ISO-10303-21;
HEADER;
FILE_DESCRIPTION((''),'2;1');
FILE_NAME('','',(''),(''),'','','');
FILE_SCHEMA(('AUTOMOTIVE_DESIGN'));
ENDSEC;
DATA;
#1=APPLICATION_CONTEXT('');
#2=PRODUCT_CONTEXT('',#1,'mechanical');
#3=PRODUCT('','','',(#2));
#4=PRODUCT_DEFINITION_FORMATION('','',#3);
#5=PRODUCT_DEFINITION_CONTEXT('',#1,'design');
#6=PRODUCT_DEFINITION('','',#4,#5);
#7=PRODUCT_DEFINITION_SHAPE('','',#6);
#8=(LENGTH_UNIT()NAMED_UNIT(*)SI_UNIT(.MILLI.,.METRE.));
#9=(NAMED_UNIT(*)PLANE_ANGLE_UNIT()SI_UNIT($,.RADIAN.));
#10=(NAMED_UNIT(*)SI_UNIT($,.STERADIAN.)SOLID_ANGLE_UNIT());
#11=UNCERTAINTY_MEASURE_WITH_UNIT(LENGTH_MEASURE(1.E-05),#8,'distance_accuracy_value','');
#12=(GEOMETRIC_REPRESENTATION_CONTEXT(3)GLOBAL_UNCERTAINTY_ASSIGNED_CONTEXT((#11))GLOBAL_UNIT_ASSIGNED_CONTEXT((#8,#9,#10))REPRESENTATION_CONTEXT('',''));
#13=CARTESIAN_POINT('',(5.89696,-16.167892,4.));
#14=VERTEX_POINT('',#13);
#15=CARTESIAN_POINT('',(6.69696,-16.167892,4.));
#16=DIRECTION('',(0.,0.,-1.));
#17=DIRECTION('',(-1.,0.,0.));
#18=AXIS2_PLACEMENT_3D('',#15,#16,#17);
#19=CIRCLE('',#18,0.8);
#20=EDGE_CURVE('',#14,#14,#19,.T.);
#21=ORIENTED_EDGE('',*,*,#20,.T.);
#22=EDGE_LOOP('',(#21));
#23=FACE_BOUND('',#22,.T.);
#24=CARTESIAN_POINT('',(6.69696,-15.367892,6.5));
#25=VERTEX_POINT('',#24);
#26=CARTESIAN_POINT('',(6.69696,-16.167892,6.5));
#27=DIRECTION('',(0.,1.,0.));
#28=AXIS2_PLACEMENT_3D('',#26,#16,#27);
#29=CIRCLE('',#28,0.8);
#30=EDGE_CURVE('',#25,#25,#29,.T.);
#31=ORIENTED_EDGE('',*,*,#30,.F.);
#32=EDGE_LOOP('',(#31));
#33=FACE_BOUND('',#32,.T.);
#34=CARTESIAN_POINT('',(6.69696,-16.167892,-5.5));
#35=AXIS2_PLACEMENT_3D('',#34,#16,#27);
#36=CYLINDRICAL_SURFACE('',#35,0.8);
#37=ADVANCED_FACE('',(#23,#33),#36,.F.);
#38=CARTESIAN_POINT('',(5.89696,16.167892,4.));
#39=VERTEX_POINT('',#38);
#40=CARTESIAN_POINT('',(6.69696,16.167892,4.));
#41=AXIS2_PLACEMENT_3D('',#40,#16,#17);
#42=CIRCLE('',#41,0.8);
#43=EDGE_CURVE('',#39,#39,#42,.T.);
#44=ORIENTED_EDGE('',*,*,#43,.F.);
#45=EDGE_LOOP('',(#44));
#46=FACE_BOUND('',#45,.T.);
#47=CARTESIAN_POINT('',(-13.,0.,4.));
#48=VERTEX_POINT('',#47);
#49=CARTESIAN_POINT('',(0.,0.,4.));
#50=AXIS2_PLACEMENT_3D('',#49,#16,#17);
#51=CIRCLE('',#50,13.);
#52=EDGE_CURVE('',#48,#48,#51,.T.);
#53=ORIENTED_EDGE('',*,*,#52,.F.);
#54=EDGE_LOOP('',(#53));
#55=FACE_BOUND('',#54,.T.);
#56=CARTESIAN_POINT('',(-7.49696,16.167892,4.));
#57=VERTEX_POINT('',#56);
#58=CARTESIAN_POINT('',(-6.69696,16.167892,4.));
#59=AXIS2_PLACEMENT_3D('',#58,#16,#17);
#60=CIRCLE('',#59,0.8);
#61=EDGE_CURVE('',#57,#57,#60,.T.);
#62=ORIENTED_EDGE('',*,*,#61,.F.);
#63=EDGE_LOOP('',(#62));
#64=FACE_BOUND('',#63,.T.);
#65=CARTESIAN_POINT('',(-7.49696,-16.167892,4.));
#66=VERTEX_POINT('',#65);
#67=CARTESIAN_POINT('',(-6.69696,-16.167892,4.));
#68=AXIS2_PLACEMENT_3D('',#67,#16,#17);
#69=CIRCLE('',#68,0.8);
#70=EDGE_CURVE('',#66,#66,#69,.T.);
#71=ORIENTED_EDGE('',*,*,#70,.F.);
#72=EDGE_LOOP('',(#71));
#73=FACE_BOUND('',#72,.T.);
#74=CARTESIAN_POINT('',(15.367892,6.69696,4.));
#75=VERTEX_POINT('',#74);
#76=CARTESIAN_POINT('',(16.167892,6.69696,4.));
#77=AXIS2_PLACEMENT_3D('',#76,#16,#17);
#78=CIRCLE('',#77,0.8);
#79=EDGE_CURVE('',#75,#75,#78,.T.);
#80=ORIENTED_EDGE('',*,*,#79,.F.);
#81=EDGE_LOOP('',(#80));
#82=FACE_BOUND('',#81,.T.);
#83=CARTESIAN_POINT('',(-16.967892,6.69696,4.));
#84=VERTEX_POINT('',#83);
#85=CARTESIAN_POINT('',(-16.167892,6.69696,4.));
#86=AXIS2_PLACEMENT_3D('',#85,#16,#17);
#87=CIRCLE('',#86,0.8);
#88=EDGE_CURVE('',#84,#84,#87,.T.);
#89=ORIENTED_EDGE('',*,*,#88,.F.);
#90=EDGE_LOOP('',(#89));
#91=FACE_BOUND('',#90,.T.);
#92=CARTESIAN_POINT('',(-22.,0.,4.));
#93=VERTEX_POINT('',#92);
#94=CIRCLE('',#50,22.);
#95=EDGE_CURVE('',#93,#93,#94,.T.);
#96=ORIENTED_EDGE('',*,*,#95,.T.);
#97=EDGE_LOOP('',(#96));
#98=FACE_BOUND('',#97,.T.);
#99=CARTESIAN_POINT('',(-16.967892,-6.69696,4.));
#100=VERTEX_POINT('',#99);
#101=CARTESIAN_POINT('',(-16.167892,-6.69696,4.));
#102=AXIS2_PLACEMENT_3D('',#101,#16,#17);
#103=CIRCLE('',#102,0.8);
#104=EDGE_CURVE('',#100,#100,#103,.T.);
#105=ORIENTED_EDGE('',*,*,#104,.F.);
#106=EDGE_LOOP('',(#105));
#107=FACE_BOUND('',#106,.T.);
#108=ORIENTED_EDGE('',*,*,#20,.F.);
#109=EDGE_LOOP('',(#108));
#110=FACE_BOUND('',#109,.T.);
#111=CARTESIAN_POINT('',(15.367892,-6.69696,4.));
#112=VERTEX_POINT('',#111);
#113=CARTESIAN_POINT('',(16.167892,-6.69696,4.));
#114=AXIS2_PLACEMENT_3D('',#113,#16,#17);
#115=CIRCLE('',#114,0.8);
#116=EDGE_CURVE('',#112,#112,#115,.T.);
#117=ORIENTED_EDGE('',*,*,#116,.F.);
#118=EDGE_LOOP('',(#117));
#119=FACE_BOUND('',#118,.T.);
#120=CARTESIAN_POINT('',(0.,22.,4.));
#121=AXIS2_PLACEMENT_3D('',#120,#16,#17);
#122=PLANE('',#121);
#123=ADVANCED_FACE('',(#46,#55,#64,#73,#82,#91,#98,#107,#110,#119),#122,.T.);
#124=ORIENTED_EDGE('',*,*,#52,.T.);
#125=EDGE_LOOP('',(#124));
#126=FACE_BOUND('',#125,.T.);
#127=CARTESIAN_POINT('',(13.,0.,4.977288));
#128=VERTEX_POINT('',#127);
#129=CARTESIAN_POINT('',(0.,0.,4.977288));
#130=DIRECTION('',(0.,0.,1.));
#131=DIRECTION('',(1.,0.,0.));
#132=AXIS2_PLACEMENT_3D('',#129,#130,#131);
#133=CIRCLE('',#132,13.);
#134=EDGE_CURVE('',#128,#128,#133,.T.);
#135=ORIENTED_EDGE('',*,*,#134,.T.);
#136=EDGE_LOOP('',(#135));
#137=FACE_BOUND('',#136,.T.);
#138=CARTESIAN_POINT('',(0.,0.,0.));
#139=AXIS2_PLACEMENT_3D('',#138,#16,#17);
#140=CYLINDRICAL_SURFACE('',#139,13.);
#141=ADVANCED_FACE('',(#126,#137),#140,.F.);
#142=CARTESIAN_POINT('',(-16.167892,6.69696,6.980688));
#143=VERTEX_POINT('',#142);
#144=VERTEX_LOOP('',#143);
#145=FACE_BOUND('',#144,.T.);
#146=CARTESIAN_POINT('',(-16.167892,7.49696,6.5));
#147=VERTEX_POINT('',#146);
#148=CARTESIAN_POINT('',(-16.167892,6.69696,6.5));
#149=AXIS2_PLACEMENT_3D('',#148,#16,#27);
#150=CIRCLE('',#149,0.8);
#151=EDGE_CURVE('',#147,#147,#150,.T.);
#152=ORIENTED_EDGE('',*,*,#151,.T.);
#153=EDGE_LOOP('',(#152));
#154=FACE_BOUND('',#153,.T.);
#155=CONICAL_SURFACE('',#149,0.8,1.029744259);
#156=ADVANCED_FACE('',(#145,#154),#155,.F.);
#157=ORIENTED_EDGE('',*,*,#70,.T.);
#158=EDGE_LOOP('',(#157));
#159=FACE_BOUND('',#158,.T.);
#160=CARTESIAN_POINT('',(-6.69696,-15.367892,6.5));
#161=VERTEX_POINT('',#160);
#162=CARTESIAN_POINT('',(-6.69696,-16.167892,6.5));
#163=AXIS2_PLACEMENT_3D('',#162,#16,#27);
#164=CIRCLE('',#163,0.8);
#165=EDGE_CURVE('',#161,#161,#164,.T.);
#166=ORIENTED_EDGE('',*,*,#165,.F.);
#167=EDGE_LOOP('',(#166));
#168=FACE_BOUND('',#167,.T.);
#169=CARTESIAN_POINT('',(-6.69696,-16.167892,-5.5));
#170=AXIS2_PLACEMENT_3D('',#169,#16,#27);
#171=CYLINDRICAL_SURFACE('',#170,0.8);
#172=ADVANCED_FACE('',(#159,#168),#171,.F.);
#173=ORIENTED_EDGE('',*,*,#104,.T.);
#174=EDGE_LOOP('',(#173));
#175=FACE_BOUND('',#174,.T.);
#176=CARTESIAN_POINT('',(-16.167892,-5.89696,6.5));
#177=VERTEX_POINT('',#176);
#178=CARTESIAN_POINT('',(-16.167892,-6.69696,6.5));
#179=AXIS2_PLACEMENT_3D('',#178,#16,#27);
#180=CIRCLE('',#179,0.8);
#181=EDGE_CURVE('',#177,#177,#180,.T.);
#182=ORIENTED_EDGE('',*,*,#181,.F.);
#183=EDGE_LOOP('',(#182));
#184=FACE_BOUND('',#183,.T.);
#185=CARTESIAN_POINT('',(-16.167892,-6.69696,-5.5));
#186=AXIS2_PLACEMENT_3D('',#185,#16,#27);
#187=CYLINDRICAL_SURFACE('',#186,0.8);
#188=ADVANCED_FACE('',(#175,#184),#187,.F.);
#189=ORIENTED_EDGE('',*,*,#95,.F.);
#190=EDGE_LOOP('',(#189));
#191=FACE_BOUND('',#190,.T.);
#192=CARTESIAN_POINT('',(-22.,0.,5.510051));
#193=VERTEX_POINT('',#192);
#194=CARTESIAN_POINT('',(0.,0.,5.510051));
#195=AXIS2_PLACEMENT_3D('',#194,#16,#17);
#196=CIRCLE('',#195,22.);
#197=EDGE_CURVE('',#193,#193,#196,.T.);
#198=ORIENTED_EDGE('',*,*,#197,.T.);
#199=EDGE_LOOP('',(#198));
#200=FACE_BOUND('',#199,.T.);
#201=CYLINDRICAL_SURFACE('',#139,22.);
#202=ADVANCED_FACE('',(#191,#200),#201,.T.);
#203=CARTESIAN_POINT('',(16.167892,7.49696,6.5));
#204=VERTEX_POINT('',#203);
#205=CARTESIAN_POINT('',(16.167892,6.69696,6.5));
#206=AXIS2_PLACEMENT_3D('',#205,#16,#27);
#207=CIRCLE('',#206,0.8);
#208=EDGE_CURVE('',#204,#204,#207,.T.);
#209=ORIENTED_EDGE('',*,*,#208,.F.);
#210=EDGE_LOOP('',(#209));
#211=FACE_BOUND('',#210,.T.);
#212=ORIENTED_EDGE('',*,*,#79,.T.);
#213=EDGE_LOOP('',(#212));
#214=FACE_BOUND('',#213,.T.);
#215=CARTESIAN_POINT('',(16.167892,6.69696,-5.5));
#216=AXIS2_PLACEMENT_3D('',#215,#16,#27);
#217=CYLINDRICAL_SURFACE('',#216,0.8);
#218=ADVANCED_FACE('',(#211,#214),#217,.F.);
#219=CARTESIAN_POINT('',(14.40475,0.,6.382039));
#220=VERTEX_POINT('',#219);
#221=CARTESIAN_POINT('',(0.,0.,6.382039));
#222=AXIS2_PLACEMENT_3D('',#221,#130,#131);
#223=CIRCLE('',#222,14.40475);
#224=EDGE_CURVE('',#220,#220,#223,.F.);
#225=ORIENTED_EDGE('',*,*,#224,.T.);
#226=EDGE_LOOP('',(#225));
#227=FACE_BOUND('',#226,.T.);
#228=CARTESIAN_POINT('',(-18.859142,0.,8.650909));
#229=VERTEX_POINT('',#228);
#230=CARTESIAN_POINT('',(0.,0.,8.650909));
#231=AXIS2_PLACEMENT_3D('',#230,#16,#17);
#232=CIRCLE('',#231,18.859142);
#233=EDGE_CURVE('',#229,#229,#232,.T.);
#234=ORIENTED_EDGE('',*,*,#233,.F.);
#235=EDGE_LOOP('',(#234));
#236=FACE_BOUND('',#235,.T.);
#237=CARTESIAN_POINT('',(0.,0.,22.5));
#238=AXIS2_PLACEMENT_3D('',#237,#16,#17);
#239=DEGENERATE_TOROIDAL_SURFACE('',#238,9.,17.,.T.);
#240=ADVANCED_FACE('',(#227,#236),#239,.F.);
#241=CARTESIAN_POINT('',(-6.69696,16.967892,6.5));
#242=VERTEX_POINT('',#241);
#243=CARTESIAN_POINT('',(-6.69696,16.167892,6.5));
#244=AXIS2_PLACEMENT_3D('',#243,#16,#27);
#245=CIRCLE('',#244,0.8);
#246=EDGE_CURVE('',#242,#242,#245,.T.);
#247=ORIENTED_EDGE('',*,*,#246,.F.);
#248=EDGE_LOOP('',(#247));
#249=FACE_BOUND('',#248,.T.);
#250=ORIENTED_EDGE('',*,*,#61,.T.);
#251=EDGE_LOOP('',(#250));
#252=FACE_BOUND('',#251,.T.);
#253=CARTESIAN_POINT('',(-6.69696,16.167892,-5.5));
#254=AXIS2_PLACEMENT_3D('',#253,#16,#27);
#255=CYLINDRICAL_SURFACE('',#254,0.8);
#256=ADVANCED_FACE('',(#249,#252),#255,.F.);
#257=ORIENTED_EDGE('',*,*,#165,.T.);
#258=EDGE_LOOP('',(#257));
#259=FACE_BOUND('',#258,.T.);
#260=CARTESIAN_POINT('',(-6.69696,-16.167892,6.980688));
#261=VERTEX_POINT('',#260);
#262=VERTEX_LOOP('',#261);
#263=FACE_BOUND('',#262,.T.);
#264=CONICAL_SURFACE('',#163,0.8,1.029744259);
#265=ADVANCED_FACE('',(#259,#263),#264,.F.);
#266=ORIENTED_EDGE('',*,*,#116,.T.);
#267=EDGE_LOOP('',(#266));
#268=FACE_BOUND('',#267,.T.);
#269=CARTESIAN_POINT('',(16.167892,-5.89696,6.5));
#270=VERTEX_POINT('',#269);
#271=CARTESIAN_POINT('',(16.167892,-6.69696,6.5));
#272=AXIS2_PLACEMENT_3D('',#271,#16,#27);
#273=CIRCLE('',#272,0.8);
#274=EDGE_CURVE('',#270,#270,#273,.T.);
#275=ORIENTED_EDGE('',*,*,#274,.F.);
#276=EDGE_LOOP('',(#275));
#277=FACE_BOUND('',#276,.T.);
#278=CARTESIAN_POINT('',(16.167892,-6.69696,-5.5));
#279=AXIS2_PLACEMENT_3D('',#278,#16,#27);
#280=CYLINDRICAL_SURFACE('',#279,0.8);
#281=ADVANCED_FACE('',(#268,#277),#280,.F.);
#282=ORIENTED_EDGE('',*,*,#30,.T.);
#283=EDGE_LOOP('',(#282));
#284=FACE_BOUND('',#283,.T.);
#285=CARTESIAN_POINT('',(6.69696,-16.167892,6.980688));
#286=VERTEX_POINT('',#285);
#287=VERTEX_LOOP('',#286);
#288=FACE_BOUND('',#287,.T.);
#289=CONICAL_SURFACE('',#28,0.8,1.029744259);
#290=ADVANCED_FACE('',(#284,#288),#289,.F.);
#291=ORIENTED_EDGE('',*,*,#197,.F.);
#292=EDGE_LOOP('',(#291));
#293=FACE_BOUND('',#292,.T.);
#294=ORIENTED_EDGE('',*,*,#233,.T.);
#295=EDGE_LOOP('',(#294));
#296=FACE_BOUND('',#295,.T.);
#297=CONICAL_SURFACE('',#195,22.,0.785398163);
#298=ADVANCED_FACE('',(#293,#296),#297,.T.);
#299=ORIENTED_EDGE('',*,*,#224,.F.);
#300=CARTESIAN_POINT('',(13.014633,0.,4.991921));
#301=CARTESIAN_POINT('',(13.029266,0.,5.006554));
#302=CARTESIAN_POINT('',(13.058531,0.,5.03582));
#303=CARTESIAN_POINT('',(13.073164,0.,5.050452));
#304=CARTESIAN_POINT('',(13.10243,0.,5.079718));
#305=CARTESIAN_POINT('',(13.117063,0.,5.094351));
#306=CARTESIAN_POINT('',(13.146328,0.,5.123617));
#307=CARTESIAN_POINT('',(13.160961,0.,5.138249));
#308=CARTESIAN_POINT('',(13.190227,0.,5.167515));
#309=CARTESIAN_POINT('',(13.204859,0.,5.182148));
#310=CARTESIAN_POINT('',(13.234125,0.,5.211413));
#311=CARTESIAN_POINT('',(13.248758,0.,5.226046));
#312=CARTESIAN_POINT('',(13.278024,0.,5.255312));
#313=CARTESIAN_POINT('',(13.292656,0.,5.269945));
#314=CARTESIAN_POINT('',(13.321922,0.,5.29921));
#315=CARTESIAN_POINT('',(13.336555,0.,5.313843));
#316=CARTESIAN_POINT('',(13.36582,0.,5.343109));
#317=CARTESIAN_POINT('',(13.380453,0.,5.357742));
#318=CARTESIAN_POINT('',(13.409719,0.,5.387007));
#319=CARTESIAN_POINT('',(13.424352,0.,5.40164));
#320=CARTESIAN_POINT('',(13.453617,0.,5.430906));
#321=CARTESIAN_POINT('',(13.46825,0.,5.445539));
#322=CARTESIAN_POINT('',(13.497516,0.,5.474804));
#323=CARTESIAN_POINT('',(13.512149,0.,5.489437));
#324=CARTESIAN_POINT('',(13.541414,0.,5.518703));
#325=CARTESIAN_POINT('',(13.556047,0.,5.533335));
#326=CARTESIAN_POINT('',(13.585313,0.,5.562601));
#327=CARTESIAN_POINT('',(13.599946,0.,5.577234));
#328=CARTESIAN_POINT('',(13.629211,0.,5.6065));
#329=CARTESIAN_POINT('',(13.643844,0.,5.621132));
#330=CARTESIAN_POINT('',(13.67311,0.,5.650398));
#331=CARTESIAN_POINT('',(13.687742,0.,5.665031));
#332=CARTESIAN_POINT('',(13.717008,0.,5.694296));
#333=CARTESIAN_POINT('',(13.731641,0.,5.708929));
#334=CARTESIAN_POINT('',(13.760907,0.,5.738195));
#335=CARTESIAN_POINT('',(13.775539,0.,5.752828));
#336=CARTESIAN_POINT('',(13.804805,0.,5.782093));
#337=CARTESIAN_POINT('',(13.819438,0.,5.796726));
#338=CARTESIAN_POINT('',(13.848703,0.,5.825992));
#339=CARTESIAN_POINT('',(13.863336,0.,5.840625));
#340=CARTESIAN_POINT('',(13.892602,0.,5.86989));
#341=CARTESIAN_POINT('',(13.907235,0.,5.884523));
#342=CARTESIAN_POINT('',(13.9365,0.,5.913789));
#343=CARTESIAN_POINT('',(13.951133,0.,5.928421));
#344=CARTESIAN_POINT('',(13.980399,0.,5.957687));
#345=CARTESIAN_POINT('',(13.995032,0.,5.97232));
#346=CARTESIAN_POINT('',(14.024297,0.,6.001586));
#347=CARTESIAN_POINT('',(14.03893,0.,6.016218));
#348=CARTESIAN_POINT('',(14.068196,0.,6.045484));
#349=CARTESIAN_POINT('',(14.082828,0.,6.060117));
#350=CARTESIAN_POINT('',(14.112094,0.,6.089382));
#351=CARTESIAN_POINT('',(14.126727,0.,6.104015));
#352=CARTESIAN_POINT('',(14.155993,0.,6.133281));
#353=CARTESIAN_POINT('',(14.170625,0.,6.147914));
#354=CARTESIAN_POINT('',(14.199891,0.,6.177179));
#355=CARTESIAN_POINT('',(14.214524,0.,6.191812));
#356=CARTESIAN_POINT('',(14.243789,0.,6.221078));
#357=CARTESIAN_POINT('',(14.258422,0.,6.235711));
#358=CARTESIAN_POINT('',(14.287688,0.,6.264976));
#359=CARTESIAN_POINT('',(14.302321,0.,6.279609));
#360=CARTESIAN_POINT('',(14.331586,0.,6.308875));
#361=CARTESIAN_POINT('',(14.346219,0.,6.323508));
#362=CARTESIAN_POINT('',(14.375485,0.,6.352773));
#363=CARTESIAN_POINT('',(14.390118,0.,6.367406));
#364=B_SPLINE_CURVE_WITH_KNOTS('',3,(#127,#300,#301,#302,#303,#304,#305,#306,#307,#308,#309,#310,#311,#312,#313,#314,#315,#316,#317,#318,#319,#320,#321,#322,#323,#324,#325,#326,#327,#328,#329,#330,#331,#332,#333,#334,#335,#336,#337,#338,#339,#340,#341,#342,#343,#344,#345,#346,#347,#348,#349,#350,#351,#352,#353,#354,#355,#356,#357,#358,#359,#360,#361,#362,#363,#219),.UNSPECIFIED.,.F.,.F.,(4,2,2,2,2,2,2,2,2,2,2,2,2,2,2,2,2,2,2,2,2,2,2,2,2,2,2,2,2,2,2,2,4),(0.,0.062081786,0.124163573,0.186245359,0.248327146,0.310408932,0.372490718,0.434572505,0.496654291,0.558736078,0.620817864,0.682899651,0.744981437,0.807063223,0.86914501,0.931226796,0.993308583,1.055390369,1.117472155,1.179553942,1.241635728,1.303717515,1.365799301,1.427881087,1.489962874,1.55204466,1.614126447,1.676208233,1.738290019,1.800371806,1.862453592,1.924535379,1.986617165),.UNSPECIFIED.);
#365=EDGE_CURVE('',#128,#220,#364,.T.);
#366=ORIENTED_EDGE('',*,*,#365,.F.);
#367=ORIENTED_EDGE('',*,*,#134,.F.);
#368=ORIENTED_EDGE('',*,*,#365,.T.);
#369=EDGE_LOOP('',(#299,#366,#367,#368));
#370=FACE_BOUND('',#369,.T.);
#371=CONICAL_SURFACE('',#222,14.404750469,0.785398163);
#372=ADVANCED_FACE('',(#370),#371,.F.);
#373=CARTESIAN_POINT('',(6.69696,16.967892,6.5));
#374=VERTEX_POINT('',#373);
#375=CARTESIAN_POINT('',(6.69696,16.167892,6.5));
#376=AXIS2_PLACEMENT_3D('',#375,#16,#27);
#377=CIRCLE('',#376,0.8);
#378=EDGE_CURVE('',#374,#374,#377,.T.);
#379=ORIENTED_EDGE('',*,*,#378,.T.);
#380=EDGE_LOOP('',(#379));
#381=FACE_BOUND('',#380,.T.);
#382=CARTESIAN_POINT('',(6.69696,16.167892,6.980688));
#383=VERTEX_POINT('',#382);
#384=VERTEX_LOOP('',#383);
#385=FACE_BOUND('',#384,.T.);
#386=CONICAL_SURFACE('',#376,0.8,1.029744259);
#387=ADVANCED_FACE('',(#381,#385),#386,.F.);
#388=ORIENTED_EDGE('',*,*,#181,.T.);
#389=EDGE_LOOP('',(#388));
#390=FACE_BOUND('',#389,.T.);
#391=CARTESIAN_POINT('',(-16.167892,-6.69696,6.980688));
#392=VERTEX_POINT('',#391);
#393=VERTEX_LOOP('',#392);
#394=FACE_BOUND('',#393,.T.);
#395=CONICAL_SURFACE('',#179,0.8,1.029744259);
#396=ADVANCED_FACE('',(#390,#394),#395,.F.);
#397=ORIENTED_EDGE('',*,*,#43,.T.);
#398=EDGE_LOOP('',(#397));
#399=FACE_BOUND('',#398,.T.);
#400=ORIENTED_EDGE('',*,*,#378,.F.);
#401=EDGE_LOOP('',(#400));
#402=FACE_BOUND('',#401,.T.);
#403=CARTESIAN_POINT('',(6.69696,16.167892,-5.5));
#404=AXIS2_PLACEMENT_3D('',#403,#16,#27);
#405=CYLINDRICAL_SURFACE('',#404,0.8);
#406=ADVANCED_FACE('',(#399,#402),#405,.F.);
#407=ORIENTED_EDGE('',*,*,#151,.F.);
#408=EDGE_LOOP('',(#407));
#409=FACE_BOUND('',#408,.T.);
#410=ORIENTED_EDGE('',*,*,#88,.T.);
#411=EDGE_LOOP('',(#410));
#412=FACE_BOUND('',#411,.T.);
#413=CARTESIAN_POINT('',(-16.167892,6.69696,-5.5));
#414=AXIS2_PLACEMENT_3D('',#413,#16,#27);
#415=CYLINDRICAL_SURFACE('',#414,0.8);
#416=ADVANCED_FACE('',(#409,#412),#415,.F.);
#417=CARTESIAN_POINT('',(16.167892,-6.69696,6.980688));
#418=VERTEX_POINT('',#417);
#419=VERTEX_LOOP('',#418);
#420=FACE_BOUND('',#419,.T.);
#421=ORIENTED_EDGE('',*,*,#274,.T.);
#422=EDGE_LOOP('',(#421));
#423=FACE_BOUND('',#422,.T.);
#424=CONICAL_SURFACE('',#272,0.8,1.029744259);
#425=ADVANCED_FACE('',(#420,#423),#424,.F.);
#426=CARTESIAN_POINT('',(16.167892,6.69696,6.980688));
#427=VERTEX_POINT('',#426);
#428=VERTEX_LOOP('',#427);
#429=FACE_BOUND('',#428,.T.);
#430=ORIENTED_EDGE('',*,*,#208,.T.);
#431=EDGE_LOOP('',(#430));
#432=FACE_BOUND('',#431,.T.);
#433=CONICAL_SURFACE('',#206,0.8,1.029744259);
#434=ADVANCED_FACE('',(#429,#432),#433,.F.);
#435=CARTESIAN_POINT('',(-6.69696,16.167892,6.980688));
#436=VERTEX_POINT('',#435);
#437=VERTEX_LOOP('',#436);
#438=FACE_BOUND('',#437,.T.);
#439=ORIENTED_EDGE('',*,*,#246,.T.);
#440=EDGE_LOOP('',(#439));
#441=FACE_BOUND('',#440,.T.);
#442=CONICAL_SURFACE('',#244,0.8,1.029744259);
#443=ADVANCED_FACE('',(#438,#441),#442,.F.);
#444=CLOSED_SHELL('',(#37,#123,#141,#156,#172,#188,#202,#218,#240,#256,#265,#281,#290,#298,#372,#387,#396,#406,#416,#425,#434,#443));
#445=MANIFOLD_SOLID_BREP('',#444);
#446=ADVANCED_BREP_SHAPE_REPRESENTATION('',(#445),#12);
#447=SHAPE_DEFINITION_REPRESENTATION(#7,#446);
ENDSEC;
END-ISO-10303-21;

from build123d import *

# Parameters (mm, degrees)
FORMSENKUNG_F_R_M3_SENKSCHRAUBE_MIT_2_COUNT = 2
FORMSENKUNG_F_R_M3_SENKSCHRAUBE_MIT_2_PITCH = 24.748737342
FORMSENKUNG_F_R_M3_SENKSCHRAUBE_MIT_3_COUNT = 2
FORMSENKUNG_F_R_M3_SENKSCHRAUBE_MIT_3_PITCH = 13.393920133
FORMSENKUNG_F_R_M3_SENKSCHRAUBE_MIT_4_COUNT = 2
FORMSENKUNG_F_R_M3_SENKSCHRAUBE_MIT_4_PITCH = 13.393920133
FASE2_SIZE                                  = 1


with BuildPart() as part:
    # Skizze2 → Rotation1 (revolve)
    with BuildSketch(Plane(origin=(0, 0, 0), x_dir=(0, 0, -1), z_dir=(1, 0, 0)), mode=Mode.PRIVATE) as rotation1_sk:
        with BuildLine():
            Line((-4, 22), (-5.510050506, 22))
            Line((-5.510050506, 22), (-8.650908847, 18.859141659))
            ThreePointArc((-8.650908847, 18.859141659), (-7.034102467, 16.057337565), (-5.977288358, 13))
            Line((-5.977288358, 13), (-4, 13))
            Line((-4, 13), (-4, 22))
        make_face()
    revolve(rotation1_sk.sketch.rotate(Axis((0, 0, 0), (0, 0, 1)), 90), axis=Axis((0, 0, 0), (0, 0, 1)))

    # Skizze4 → Formsenkung für M3 Senkschraube mit Innensechskant1 (revolve, cut)
    with BuildSketch(Plane(origin=(-6.696960066, 16.167891819, -5.5), x_dir=(0, 1, 0), z_dir=(1, 0, 0))):
        Polygon((0, 0), (0, 12.480688495), (0.8, 12), (0.8, 1.15), (1.95, 0), align=None)
    formsenkung_f_r_m3_senkschraube_mit_inne = revolve(axis=Axis((-6.696960066, 16.167891819, -11.85), (0, 0, 1)), mode=Mode.SUBTRACT)

    # Formsenkung f_r M3 Senkschraube mit  2: Formsenkung für M3 Senkschraube mit Innensechskant1 ×2
    with Locations(*[Vector(0.9238795325112864, -0.3826834323650907, 0) * (i * FORMSENKUNG_F_R_M3_SENKSCHRAUBE_MIT_2_PITCH) for i in range(1, FORMSENKUNG_F_R_M3_SENKSCHRAUBE_MIT_2_COUNT)]):
        add(formsenkung_f_r_m3_senkschraube_mit_inne, mode=Mode.SUBTRACT)

    # Formsenkung f_r M3 Senkschraube mit  3: Formsenkung für M3 Senkschraube mit Innensechskant1 ×2
    with Locations(*[(i * FORMSENKUNG_F_R_M3_SENKSCHRAUBE_MIT_3_PITCH, 0, 0) for i in range(1, FORMSENKUNG_F_R_M3_SENKSCHRAUBE_MIT_3_COUNT)]):
        add(formsenkung_f_r_m3_senkschraube_mit_inne, mode=Mode.SUBTRACT)

    # Formsenkung f_r M3 Senkschraube mit  4: Formsenkung für M3 Senkschraube mit Innensechskant1 ×2
    with Locations(*[Vector(-0.7071067811865511, -0.707106781186544, 0) * (i * FORMSENKUNG_F_R_M3_SENKSCHRAUBE_MIT_4_PITCH) for i in range(1, FORMSENKUNG_F_R_M3_SENKSCHRAUBE_MIT_4_COUNT)]):
        add(formsenkung_f_r_m3_senkschraube_mit_inne, mode=Mode.SUBTRACT)

    # Spiegeln1: Formsenkung für M3 Senkschraube mit Innensechskant1 across plane
    add(formsenkung_f_r_m3_senkschraube_mit_inne.mirror(Plane.ZX), mode=Mode.SUBTRACT)

    # Spiegeln1 copy 1 sketch → Spiegeln1 copy 1 (revolve, cut)
    with BuildSketch(Plane(origin=(16.167891819, -6.696960066, -5.5), x_dir=(0, -1, 0), z_dir=(1, 0, 0))):
        Polygon((0, 0), (0, -12.480688495), (0.8, -12), (0.8, -1.15), (1.95, 0), align=None)
    revolve(axis=Axis((16.167891819, -6.696960066, -11.85), (0, 0, -1)), mode=Mode.SUBTRACT)

    # Spiegeln1 copy 2 sketch → Spiegeln1 copy 2 (revolve, cut)
    with BuildSketch(Plane(origin=(6.696960066, -16.167891819, -5.5), x_dir=(0, -1, 0), z_dir=(1, 0, 0))):
        Polygon((0, 0), (0, -12.480688495), (0.8, -12), (0.8, -1.15), (1.95, 0), align=None)
    revolve(axis=Axis((6.696960066, -16.167891819, -11.85), (0, 0, -1)), mode=Mode.SUBTRACT)

    # Spiegeln1 copy 3 sketch → Spiegeln1 copy 3 (revolve, cut)
    with BuildSketch(Plane(origin=(-16.167891819, -6.696960066, -5.5), x_dir=(0, -1, 0), z_dir=(1, 0, 0))):
        Polygon((0, 0), (0, -12.480688495), (0.8, -12), (0.8, -1.15), (1.95, 0), align=None)
    revolve(axis=Axis((-16.167891819, -6.696960066, -11.85), (0, 0, -1)), mode=Mode.SUBTRACT)

    # Fase2
    # the kernel refuses this chamfer: 1.357533455, 1 mm, written as the material it takes off along each edge
    with BuildSketch(Plane(origin=(0, 0, 5.977288358), x_dir=(-1, 0, 0), z_dir=(0, 1, 0))) as fase2_piece_1:
        with BuildLine():
            Line((13, -FASE2_SIZE), (14.404750469, 0.404750469))
            ThreePointArc((14.404750469, 0.404750469), (13.729596576, 0.193874689), (13, 0))
            Line((13, 0), (13, -FASE2_SIZE))
        make_face()
    revolve(axis=Axis((0, 0, 5.977288358), (0, 0, 1)), mode=Mode.SUBTRACT)


solid = part.part
